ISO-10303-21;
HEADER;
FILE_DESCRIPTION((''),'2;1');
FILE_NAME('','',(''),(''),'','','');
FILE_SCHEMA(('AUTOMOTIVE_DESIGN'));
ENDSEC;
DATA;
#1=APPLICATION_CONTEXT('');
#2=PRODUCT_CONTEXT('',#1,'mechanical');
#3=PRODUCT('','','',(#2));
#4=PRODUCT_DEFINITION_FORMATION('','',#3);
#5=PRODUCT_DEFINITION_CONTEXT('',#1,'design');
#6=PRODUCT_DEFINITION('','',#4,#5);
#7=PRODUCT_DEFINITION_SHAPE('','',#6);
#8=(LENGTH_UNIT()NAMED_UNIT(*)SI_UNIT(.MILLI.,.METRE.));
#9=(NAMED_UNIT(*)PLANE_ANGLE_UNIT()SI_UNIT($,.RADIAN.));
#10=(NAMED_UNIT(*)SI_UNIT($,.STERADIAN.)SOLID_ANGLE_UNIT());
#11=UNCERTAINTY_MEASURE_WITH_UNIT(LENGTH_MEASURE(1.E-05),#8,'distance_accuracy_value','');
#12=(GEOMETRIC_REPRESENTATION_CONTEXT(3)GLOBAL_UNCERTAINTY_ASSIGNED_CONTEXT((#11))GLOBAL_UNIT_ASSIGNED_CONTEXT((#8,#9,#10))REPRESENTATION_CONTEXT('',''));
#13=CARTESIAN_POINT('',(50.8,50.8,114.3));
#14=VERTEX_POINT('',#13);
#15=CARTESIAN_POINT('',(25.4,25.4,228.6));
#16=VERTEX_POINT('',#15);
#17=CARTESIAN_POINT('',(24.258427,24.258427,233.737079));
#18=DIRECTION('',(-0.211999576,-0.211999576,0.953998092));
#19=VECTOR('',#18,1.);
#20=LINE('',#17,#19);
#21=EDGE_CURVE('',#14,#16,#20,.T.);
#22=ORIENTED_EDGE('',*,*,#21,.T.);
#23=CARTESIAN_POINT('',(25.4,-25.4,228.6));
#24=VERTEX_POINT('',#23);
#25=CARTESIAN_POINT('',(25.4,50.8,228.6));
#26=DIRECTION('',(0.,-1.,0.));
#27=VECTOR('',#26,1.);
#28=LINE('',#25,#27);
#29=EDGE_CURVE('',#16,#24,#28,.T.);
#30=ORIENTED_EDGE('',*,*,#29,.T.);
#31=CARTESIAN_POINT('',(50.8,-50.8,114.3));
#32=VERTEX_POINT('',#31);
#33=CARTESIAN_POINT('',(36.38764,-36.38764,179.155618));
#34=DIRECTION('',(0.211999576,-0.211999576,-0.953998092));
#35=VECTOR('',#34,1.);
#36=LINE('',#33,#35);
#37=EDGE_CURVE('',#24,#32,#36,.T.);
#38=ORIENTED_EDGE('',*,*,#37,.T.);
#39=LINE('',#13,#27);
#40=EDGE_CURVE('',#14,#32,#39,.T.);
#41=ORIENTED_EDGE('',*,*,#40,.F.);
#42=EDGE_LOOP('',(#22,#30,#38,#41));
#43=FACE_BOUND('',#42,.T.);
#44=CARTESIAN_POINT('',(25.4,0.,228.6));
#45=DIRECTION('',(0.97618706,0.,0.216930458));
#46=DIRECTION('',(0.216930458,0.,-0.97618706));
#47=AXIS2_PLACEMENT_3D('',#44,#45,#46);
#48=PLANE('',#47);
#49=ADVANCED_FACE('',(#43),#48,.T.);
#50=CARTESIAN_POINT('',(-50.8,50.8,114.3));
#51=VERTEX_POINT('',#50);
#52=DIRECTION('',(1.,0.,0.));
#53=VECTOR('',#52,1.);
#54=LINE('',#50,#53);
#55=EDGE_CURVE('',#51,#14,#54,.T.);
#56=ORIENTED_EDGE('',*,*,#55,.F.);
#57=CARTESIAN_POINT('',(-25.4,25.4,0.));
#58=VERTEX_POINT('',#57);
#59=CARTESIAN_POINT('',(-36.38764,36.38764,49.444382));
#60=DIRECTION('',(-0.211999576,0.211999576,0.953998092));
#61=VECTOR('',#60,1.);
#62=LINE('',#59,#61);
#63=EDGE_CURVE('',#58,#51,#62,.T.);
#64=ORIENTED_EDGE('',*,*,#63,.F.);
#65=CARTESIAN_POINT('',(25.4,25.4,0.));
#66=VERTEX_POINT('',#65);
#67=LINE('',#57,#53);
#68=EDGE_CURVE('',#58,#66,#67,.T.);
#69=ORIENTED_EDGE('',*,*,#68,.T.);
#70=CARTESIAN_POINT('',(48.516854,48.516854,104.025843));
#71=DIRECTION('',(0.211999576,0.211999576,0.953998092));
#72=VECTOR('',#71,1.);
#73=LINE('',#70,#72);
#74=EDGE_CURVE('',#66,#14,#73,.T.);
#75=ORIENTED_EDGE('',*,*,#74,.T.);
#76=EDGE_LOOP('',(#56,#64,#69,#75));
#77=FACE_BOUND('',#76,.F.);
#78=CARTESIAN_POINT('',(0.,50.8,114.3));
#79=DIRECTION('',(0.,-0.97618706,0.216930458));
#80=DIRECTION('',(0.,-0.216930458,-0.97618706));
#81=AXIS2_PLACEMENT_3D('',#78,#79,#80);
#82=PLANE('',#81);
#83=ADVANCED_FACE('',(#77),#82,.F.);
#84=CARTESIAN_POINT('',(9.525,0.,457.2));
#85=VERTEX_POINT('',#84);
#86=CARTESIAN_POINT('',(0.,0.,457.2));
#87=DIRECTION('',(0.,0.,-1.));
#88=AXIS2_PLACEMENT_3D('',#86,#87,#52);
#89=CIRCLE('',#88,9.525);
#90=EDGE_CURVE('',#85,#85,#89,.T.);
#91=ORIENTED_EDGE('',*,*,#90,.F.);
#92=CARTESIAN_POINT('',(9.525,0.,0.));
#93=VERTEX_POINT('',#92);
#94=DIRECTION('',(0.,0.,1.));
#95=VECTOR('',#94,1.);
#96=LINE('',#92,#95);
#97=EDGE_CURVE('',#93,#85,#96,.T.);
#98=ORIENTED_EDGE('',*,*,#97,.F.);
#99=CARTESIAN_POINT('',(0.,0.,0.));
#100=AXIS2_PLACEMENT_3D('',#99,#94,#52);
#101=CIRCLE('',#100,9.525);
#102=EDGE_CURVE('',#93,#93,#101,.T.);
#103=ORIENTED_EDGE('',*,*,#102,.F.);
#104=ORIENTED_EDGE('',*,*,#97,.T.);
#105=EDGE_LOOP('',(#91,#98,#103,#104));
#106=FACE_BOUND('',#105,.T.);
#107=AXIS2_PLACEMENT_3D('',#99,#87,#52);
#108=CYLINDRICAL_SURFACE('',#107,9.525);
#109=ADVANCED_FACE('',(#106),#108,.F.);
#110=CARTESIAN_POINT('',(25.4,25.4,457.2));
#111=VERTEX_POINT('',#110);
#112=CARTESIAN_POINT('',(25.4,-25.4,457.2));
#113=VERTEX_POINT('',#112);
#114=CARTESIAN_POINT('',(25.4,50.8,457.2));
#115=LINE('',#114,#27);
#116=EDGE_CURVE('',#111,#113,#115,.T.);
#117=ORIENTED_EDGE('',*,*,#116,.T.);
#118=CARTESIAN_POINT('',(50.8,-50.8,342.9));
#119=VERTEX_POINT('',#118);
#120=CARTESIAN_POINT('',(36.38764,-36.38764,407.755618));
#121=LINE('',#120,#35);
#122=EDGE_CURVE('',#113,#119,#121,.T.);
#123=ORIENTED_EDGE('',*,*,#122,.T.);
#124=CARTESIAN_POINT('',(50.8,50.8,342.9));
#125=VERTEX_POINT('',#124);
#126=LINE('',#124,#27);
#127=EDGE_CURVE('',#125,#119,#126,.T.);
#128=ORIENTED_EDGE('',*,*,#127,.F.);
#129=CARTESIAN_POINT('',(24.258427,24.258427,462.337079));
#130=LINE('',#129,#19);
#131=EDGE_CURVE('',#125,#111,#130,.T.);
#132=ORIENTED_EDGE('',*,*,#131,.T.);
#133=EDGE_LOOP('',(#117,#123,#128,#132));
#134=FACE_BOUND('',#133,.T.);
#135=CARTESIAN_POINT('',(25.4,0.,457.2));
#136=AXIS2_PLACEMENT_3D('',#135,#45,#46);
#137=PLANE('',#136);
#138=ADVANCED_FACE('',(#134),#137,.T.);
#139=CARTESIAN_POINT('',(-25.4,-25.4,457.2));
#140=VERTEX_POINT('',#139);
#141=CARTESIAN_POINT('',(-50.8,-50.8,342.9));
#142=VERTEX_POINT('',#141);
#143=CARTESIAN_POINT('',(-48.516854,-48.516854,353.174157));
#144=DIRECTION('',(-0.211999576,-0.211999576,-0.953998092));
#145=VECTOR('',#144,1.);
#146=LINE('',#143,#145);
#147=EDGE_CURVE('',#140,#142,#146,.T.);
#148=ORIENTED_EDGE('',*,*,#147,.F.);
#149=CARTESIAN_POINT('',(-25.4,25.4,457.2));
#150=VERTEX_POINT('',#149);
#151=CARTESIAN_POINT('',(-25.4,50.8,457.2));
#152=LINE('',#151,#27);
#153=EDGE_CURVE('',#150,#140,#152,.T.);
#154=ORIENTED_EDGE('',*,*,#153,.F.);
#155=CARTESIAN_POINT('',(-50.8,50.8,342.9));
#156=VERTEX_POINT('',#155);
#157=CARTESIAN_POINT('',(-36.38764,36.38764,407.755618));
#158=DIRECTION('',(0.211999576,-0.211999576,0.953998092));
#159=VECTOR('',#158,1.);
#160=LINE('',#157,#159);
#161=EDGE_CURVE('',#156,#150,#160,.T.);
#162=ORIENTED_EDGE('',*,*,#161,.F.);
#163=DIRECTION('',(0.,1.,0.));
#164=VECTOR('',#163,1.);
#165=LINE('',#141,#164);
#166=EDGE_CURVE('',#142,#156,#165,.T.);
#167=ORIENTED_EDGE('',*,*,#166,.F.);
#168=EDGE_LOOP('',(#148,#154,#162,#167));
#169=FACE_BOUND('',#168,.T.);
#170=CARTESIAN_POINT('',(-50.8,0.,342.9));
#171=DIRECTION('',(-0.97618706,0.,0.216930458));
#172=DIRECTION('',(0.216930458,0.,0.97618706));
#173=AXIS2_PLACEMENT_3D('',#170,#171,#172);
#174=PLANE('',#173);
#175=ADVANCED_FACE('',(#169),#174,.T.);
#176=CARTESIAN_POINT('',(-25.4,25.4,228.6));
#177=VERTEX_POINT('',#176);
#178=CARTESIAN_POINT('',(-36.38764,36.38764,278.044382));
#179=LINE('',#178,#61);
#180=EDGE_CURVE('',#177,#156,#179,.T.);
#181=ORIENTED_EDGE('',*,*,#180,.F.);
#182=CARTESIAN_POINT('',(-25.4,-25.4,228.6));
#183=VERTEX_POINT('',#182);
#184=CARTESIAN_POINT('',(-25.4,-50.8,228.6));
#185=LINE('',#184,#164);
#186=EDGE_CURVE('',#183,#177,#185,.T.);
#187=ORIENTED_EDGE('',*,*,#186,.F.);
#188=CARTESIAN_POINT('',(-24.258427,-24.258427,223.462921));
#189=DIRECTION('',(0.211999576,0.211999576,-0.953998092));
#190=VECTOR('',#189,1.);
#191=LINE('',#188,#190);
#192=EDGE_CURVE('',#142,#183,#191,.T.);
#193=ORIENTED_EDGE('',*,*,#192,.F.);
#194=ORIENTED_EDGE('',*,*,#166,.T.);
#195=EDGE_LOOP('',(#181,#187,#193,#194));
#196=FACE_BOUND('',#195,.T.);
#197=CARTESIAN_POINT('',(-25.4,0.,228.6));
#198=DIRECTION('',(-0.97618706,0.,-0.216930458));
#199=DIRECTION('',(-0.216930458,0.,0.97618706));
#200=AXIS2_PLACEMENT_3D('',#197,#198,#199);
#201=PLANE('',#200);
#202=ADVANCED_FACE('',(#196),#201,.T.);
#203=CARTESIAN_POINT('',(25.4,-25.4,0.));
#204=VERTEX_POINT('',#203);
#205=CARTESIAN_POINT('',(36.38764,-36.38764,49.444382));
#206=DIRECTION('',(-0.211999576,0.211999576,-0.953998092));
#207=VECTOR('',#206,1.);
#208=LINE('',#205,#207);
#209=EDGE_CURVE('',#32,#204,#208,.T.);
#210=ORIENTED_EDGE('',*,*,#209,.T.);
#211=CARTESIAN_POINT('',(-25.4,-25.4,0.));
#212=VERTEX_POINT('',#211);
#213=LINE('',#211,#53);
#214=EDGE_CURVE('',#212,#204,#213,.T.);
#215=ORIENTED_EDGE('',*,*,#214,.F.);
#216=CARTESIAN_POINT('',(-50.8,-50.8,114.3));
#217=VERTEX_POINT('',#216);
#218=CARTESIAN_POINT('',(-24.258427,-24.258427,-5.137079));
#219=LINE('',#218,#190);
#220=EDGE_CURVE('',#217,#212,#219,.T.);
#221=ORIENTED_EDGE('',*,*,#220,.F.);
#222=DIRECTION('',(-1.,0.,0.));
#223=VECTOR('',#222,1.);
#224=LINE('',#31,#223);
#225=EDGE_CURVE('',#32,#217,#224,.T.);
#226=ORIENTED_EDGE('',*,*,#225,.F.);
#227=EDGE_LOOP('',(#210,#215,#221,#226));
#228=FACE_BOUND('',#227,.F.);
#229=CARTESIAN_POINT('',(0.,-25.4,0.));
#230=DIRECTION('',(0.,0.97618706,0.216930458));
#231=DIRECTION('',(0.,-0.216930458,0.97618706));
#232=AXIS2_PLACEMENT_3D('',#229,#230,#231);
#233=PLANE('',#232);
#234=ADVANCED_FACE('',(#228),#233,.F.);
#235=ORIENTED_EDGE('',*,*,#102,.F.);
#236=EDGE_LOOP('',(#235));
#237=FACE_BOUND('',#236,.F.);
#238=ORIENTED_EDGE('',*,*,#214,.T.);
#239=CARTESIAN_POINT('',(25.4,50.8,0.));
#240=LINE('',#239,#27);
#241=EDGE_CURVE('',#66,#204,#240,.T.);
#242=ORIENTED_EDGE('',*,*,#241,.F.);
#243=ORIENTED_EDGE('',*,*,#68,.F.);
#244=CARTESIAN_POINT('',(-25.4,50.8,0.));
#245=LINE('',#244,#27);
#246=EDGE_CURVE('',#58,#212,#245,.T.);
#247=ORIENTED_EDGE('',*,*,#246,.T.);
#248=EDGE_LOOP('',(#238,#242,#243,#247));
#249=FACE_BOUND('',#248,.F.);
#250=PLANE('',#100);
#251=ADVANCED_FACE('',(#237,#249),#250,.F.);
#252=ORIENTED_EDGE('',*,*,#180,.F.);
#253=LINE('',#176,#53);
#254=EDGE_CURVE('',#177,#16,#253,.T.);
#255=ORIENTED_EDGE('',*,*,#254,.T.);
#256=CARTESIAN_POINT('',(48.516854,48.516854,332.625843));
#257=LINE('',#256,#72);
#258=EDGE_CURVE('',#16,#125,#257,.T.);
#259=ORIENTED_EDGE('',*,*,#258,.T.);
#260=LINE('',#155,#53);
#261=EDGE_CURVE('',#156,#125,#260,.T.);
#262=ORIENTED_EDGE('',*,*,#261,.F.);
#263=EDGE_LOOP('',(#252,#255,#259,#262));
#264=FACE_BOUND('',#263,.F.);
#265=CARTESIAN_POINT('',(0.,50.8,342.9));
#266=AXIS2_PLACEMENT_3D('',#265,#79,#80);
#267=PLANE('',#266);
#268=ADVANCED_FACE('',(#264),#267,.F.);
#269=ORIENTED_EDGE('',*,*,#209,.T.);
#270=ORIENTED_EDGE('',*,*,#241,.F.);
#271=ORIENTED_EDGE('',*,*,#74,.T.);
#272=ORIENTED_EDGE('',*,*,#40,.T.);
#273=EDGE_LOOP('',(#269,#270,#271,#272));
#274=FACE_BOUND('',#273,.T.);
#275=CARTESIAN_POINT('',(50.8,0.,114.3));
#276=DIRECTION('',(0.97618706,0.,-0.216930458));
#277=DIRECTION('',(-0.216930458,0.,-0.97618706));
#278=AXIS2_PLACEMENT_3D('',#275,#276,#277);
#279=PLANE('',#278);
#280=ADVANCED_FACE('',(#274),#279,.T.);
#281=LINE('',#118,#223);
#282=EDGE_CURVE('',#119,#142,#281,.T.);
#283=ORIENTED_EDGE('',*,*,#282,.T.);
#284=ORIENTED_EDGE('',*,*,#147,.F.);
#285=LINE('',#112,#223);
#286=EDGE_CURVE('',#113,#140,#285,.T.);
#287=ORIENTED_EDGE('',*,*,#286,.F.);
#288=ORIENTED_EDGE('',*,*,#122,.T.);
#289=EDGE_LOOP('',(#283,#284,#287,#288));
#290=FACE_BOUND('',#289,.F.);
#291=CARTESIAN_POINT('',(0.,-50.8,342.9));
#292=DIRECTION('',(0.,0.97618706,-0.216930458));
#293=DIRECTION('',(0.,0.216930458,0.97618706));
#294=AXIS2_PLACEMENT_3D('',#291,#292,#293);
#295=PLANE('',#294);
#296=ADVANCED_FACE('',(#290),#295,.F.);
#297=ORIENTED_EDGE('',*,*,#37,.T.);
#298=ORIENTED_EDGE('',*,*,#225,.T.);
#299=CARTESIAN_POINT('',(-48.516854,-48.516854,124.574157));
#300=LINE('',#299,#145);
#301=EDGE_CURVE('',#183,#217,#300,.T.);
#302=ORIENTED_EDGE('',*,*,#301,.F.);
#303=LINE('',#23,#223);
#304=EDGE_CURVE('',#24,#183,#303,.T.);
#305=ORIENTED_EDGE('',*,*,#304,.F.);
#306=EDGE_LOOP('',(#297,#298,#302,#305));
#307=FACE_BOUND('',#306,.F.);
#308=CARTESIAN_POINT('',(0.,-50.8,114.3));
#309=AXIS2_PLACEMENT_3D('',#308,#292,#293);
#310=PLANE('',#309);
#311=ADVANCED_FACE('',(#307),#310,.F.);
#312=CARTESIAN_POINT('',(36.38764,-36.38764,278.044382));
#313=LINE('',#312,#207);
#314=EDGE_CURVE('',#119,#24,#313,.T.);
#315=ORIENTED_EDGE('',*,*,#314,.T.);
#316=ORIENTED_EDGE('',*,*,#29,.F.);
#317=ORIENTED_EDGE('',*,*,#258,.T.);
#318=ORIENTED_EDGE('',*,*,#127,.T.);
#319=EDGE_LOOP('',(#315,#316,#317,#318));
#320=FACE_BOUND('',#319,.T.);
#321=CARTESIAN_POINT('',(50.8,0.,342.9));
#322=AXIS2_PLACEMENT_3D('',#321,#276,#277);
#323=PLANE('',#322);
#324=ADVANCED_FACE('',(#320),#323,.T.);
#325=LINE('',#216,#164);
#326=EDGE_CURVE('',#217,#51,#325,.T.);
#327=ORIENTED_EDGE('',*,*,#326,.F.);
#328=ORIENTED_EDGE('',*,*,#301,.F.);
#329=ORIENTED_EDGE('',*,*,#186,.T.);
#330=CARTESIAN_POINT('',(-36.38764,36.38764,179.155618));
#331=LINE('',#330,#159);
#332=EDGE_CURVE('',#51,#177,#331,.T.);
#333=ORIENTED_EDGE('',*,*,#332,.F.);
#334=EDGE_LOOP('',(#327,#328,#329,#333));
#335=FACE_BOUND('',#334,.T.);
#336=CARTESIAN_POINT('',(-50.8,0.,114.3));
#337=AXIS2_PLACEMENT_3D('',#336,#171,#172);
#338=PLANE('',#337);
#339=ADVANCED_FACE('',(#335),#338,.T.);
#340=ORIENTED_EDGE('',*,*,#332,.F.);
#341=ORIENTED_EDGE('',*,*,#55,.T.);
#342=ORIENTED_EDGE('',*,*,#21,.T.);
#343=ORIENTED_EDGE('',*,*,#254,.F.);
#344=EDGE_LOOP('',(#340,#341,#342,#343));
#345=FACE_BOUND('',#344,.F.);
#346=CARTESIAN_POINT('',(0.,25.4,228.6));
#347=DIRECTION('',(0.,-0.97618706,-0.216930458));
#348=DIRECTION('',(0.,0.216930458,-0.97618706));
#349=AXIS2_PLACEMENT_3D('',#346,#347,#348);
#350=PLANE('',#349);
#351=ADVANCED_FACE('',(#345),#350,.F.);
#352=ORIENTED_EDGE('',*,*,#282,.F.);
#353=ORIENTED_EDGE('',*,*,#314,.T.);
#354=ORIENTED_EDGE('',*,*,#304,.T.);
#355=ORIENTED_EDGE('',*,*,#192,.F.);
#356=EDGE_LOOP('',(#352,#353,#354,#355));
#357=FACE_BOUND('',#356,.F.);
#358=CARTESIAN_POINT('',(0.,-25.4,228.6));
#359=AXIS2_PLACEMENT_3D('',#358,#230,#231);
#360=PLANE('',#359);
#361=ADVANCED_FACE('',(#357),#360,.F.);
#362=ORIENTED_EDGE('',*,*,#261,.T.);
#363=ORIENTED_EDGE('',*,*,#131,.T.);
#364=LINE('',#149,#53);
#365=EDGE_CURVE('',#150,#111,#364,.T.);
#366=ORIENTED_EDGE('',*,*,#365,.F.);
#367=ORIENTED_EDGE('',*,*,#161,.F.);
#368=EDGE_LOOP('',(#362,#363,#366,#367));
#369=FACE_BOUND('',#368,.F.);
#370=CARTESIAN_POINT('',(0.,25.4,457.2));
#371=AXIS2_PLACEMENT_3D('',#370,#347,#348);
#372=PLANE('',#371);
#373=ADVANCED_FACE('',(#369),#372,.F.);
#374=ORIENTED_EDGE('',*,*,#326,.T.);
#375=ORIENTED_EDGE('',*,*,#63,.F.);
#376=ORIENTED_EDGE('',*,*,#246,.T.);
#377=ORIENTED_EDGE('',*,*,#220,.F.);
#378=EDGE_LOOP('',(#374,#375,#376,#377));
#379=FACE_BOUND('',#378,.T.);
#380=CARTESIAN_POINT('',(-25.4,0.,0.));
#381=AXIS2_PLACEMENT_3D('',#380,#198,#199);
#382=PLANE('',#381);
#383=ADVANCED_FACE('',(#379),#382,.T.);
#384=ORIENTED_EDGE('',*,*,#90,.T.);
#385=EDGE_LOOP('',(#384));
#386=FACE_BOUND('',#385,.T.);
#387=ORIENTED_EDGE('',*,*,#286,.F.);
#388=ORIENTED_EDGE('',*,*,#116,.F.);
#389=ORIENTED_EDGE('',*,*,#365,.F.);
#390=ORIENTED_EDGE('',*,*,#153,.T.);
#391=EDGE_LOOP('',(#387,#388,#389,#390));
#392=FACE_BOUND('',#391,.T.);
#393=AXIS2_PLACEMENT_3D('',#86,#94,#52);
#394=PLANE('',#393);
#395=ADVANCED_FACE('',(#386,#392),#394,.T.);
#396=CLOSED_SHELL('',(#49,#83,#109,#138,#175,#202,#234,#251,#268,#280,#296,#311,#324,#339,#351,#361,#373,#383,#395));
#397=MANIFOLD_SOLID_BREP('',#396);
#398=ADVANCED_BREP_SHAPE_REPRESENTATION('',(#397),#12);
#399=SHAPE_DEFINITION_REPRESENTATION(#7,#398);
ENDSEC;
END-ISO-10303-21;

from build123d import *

# Parameters (mm, degrees)
F0_W          = 101.6
F0_H          = 101.6
F1_DEPTH      = 457.2
F3_DEPTH      = 50.801
F3_DEPTH_BACK = 50.801
F5_DEPTH      = 50.801
F5_DEPTH_BACK = 50.801
F6_R          = 9.525
F7_DEPTH      = 457.201
F7_DEPTH_BACK = 708


# Not quite as in the source:
# - an extrude ends at something that could not be found from the text; its depth is read off the source's solid


with BuildPart() as f1:
    # F0 (on Top) → F1 (new body)
    with BuildSketch(Plane.XY):
        Rectangle(F0_W, F0_H)
    extrude(amount=F1_DEPTH)

    # F2 (on Front) → F3 (cut, two sides)
    with BuildSketch(Plane.XZ) as f3_sk:
        Polygon((-76.2, 0), (-50.8, 0), (-25.4, 0), (-50.8, 114.3), (-25.4, 228.6), (-50.8, 342.9), (-25.4, 457.2), (-50.8, 457.2), (-76.2, 457.2), align=None)
        Polygon((76.2, 457.2), (50.8, 457.2), (25.4, 457.2), (50.8, 342.9), (25.4, 228.6), (50.8, 114.3), (25.4, 0), (50.8, 0), (76.2, 0), align=None)
    extrude(amount=-F3_DEPTH, mode=Mode.SUBTRACT)
    extrude(f3_sk.sketch, amount=F3_DEPTH_BACK, mode=Mode.SUBTRACT)

    # F4 (on Right) → F5 (cut, two sides)
    with BuildSketch(Plane.YZ) as f5_sk:
        Polygon((76.2, 457.2), (50.8, 457.2), (25.4, 457.2), (50.8, 342.9), (25.4, 228.6), (50.8, 114.3), (25.4, 0), (50.8, 0), (76.2, 0), align=None)
        Polygon((-25.4, 457.2), (-50.8, 457.2), (-76.2, 457.2), (-76.2, 0), (-50.8, 0), (-25.4, 0), (-50.8, 114.3), (-25.4, 228.6), (-50.8, 342.9), align=None)
    extrude(amount=-F5_DEPTH, mode=Mode.SUBTRACT)
    extrude(f5_sk.sketch, amount=F5_DEPTH_BACK, mode=Mode.SUBTRACT)

    # F6 (on Top) → F7 (cut, two sides)
    with BuildSketch(Plane.XY) as f7_sk:
        Circle(F6_R)
    extrude(amount=F7_DEPTH, mode=Mode.SUBTRACT)
    extrude(f7_sk.sketch, amount=-F7_DEPTH_BACK, mode=Mode.SUBTRACT)


solid = f1.part
